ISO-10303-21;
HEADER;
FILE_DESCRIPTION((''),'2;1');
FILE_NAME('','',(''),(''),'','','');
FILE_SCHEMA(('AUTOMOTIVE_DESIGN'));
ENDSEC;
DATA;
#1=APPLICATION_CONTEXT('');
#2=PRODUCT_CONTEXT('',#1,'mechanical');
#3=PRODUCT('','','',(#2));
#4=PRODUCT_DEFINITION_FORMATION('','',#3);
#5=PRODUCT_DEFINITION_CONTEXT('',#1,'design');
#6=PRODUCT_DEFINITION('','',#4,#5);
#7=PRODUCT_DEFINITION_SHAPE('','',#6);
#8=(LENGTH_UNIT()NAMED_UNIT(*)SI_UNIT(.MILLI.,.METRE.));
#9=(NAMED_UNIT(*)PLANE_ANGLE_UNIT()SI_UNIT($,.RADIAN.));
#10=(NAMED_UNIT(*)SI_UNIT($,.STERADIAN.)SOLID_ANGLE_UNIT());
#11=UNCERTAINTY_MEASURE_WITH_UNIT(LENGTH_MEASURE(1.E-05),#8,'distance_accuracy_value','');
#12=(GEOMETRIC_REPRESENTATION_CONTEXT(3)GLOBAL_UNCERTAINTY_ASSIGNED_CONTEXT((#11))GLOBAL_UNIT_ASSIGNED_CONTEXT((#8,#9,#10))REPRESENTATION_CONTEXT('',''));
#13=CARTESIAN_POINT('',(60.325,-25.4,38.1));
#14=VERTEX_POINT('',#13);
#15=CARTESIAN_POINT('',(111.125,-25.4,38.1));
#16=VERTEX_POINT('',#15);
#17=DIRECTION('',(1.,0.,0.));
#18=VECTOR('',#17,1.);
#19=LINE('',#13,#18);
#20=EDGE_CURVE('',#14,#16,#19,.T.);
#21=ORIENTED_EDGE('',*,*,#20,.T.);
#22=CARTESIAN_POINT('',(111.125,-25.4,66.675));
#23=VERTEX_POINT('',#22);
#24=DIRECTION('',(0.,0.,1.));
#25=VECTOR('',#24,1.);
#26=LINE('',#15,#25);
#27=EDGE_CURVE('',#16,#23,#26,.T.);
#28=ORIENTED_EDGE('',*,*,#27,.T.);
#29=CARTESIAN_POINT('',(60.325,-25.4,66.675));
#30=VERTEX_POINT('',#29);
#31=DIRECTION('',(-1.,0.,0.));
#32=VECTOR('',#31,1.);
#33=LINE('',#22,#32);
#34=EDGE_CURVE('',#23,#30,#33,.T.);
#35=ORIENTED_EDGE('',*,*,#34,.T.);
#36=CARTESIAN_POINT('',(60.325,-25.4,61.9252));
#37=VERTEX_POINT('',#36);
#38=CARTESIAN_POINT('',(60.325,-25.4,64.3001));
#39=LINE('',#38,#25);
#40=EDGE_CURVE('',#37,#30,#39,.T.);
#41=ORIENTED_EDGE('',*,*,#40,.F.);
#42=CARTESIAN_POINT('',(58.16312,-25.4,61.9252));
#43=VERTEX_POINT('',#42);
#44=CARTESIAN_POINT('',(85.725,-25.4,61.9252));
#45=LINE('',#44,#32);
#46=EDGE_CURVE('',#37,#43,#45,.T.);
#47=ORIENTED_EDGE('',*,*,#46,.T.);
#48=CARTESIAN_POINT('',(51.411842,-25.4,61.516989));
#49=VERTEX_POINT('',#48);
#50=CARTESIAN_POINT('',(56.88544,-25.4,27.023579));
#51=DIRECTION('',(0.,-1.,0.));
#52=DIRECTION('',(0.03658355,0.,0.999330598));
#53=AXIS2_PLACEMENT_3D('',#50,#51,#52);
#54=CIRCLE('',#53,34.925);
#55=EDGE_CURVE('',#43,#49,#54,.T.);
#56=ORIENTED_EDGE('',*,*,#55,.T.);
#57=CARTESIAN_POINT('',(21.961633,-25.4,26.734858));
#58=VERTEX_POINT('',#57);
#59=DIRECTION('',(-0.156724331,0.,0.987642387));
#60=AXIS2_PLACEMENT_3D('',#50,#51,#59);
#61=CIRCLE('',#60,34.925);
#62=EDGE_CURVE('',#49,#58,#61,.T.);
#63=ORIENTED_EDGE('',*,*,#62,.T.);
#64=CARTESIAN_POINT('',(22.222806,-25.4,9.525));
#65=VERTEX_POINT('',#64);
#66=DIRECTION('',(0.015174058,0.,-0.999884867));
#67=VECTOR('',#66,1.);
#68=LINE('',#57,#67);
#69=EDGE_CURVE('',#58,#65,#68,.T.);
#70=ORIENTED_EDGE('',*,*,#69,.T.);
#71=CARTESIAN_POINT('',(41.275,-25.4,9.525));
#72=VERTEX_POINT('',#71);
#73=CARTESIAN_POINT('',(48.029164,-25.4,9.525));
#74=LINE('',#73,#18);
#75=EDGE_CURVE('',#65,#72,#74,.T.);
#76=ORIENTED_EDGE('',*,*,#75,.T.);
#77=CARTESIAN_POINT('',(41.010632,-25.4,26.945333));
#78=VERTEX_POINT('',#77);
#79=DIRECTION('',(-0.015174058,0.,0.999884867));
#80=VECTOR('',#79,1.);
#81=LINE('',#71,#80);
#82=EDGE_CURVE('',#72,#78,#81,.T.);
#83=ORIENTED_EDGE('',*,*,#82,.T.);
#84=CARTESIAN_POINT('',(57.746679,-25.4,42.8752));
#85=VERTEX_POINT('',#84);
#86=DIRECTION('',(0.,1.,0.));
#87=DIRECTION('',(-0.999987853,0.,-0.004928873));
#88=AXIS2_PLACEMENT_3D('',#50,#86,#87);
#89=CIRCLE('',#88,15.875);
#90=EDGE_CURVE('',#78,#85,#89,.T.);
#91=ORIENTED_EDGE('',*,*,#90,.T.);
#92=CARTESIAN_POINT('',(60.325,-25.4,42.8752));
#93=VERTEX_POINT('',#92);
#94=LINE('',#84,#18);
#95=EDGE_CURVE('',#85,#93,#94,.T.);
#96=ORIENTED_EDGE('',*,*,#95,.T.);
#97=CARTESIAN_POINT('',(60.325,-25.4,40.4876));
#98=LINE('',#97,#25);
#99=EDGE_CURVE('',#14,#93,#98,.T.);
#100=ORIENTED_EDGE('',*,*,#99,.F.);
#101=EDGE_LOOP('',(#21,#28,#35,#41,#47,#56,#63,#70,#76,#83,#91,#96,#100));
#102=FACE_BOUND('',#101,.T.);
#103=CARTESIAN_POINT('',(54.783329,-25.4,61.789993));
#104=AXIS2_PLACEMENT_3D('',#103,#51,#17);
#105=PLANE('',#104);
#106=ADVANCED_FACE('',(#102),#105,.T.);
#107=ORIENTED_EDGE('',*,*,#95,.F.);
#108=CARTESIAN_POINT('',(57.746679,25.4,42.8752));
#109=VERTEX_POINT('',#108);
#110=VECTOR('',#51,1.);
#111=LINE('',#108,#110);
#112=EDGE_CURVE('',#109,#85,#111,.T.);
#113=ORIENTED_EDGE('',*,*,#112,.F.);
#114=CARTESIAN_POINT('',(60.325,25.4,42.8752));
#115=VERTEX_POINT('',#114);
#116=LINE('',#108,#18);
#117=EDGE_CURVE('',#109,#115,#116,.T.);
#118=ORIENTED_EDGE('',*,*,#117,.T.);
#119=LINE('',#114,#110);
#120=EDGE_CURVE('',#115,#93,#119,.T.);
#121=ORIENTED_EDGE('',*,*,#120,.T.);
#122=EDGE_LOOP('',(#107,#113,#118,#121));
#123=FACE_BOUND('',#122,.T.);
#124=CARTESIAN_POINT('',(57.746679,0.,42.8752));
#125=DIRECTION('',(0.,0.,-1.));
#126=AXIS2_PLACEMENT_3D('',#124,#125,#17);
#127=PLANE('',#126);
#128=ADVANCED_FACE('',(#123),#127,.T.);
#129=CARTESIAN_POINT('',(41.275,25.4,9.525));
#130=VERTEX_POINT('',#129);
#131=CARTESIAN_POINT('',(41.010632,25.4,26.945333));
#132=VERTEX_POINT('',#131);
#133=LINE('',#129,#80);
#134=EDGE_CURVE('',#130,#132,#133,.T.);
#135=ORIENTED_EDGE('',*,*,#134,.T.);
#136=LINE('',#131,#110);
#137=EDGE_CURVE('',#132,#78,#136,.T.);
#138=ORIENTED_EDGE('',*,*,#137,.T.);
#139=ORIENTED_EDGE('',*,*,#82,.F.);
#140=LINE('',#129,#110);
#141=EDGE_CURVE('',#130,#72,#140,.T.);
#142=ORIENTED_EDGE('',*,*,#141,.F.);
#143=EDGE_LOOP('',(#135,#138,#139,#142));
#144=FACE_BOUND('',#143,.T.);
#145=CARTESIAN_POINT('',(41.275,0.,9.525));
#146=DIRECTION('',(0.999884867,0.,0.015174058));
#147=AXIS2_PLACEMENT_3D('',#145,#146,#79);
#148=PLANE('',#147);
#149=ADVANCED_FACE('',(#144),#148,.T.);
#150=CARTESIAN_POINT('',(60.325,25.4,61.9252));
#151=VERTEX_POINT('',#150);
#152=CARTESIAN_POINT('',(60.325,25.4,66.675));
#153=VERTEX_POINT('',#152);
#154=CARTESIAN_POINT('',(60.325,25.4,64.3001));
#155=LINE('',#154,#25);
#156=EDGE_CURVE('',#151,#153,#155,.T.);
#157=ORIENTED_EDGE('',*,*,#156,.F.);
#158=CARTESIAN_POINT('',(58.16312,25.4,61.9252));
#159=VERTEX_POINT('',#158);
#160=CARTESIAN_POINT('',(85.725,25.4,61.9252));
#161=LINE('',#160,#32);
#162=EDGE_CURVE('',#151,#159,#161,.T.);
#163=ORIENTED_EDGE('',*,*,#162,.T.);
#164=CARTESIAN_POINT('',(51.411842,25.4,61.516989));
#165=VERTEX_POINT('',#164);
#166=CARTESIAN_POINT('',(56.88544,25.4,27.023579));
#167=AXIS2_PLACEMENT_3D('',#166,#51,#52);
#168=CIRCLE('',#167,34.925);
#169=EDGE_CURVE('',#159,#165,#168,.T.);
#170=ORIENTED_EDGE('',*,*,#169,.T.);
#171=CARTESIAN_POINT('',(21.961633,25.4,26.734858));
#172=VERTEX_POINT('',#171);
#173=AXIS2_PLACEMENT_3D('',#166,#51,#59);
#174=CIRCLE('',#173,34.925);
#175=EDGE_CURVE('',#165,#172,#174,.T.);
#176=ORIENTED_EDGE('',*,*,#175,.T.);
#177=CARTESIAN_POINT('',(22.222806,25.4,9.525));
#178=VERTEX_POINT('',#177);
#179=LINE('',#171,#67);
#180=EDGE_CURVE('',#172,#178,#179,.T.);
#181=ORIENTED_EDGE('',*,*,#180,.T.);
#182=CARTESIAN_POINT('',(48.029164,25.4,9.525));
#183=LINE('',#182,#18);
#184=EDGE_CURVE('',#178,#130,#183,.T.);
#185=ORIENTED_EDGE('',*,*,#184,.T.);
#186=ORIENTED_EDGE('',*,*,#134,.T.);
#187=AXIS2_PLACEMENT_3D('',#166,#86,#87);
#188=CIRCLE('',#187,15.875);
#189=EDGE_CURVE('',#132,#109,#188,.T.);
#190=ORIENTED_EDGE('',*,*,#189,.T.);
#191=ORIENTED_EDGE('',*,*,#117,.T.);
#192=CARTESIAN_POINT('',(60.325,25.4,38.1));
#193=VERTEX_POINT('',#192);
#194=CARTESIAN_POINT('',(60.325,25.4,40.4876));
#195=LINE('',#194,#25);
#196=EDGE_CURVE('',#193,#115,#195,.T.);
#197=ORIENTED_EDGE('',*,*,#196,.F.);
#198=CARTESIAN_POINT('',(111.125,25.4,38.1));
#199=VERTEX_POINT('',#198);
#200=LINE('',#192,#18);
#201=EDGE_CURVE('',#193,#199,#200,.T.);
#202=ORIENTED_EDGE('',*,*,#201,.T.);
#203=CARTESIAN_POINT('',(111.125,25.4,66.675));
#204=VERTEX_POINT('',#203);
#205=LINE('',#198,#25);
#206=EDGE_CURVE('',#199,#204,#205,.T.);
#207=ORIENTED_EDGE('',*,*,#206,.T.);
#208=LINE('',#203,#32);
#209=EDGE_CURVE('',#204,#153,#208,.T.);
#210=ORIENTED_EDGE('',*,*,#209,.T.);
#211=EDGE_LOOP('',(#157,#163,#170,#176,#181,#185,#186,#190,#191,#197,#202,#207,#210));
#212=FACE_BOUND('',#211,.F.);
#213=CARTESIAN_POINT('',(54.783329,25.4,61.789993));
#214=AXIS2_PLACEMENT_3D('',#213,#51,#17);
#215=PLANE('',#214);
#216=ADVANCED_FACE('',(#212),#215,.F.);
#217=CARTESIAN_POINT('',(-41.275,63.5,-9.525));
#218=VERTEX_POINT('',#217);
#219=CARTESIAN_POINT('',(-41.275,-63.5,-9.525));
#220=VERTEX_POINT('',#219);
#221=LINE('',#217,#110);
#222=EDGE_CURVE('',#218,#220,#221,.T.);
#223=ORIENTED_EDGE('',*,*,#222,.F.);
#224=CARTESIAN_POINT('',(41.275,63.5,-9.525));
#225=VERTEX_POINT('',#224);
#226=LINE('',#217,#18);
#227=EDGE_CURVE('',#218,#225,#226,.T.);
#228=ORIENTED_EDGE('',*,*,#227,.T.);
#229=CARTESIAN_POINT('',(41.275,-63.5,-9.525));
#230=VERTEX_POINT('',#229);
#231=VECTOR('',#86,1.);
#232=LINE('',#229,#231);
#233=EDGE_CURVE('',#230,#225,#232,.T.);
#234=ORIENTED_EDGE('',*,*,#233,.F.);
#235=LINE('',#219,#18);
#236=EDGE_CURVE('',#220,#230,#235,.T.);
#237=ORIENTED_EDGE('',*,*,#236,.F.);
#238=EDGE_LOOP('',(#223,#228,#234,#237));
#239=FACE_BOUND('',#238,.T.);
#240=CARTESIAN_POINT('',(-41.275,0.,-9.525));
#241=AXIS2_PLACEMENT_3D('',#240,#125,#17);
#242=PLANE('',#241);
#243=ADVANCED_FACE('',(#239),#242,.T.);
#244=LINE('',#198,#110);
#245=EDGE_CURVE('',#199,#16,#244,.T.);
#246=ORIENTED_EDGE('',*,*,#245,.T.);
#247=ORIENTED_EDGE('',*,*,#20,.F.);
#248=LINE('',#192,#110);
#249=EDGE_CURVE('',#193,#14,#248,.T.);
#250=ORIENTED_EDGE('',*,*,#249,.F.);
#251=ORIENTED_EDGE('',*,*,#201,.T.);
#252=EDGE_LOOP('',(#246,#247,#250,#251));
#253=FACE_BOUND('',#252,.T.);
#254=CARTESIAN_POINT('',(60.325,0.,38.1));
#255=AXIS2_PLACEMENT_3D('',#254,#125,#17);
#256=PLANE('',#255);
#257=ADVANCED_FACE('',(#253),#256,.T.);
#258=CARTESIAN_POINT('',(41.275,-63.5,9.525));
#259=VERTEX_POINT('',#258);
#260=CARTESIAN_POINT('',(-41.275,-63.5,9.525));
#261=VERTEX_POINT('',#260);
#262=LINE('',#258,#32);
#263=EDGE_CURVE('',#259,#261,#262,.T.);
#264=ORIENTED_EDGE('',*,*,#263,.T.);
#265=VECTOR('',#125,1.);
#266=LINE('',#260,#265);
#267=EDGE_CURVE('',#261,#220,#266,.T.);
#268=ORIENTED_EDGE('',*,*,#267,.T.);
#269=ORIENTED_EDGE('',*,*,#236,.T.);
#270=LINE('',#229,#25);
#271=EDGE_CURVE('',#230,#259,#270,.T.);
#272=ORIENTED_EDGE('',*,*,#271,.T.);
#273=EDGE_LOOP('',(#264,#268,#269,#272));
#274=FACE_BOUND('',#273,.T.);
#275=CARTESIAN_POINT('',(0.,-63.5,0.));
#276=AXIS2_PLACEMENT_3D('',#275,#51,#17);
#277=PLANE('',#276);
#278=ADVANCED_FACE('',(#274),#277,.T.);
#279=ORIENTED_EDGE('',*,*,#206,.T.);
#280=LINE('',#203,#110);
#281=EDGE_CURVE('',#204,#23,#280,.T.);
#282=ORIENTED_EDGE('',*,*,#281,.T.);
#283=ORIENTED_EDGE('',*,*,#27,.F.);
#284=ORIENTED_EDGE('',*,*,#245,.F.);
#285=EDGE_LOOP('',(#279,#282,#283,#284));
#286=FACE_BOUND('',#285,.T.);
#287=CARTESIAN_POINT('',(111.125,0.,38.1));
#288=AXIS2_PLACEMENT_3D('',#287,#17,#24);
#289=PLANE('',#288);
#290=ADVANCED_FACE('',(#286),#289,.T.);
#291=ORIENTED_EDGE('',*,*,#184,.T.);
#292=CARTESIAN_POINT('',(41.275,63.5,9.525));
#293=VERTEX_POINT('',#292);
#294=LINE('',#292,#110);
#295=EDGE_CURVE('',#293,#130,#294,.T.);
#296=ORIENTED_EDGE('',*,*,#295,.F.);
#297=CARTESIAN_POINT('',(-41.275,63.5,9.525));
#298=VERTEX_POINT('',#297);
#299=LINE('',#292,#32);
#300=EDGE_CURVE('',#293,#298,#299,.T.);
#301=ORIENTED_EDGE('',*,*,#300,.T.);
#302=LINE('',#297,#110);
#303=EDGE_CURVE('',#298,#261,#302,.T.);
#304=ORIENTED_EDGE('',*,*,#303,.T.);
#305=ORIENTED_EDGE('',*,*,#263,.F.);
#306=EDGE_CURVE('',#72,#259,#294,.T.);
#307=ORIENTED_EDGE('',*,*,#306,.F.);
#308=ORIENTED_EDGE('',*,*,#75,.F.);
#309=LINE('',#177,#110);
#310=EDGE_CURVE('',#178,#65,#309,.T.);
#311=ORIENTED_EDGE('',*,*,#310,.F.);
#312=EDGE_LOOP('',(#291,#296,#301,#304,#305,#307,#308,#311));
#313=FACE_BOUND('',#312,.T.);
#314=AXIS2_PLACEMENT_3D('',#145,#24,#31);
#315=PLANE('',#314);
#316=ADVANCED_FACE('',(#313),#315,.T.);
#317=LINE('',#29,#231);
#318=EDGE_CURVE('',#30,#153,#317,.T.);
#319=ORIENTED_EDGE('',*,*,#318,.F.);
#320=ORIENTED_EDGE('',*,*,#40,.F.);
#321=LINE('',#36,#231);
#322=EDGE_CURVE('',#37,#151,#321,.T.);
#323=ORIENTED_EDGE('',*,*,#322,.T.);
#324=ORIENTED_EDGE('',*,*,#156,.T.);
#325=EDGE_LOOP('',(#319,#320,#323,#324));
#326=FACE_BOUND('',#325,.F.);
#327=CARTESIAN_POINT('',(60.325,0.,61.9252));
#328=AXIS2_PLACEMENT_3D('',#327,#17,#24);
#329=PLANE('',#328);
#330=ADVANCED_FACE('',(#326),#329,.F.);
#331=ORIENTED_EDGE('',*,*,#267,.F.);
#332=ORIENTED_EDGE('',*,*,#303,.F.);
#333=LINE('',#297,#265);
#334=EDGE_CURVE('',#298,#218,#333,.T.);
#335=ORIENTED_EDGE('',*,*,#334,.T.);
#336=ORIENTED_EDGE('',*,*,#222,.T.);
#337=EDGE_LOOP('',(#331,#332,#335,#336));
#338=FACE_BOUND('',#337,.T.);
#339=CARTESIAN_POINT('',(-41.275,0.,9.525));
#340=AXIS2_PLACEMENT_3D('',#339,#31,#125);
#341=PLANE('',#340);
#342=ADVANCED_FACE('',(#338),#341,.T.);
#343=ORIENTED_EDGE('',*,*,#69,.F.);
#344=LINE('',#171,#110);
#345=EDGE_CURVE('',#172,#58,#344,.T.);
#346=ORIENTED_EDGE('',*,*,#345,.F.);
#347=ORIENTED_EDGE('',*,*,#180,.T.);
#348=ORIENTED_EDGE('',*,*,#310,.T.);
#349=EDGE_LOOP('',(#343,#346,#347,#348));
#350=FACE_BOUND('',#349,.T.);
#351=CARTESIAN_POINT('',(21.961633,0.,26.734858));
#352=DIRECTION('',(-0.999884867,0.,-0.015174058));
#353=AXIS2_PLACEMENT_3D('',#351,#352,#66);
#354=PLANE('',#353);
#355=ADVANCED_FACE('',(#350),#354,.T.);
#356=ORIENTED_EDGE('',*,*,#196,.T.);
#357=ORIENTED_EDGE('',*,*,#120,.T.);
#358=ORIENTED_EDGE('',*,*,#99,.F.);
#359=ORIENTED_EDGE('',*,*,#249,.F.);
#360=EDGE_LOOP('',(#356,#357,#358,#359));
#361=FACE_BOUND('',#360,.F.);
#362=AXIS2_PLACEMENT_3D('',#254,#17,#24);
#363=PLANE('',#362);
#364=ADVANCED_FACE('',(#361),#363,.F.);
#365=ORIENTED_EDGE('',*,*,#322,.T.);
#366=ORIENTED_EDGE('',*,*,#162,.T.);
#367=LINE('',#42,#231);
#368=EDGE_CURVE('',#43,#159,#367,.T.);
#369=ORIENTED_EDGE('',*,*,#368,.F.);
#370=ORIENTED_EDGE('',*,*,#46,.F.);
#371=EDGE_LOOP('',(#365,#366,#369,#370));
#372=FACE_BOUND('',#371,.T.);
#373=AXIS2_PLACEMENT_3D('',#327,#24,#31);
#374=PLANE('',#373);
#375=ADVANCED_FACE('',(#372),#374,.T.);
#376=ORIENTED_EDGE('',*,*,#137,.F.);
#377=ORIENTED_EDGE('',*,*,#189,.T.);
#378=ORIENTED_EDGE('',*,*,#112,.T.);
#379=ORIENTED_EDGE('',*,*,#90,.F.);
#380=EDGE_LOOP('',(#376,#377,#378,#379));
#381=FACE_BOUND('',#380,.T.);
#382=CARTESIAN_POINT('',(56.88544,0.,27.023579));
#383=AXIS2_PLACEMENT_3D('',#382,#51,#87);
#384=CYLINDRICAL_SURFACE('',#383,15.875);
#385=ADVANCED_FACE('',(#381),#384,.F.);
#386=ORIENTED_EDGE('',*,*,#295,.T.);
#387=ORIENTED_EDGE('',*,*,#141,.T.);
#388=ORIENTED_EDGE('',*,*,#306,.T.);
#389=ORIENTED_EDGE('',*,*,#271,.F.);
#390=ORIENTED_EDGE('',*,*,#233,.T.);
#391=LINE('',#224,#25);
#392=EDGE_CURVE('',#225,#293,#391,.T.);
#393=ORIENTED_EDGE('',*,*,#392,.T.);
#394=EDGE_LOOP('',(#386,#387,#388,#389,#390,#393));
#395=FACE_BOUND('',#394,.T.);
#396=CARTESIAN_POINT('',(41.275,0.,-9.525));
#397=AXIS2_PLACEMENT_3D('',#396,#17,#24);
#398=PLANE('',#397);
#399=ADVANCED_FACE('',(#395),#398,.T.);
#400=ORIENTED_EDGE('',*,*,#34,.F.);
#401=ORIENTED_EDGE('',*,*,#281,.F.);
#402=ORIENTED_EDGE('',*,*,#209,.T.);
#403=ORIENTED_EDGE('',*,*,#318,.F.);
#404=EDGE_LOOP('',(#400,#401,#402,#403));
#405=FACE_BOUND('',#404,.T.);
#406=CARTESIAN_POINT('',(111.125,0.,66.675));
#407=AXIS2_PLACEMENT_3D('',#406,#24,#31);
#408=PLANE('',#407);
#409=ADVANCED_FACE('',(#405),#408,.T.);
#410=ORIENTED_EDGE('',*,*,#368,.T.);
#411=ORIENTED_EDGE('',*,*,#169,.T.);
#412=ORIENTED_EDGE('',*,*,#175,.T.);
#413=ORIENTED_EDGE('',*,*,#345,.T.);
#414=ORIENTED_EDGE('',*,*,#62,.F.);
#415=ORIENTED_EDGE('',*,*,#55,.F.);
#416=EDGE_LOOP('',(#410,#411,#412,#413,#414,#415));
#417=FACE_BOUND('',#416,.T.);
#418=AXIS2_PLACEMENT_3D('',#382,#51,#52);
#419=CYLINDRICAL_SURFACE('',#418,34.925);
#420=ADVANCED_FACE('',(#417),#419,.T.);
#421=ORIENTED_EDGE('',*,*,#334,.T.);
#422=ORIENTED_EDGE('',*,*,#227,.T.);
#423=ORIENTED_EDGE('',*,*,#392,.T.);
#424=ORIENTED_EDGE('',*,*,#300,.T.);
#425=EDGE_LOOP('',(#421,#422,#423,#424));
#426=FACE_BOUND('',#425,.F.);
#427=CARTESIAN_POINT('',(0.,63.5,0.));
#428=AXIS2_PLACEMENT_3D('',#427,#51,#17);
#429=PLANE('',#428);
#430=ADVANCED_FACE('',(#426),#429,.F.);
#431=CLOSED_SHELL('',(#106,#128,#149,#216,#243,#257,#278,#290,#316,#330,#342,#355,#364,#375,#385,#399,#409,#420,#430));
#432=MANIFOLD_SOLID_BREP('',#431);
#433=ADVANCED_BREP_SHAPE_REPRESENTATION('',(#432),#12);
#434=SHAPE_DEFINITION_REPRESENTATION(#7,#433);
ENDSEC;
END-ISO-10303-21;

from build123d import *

# Parameters (mm, degrees)
F1_DEPTH = 63.5
F0_W     = 25.4
F0_H     = 19.05
F0_H_2   = 4.7752
F0_H_3   = 4.7498
F2_DEPTH = 25.4


# Not quite as in the source:
# - a feature of the source that left no trace in its solid (it failed there, or was rolled back) is left out


with BuildPart() as f1:
    # F0 (on Front) → F1 (new body, symmetric)
    with BuildSketch(Plane.XZ):
        Polygon((41.275, -9.525), (41.275, 9.525), (22.2228064707, 9.525), (-41.275, 9.525), (-41.275, -9.525), align=None)
    extrude(amount=F1_DEPTH, both=True)

    # F0 (on Front) → F2 (join, symmetric)
    with BuildSketch(Plane.XZ):
        with BuildLine():
            add(Edge.make_bspline(
                [(51.4118423464, 61.5169892273), (53.7469843796, 61.749049716), (56.003883812, 61.8875588148), (58.1631200711, 61.9252)],
                knots=[105.6886926289, 105.6886926289, 105.6886926289, 105.6886926289, 112.3998251036, 112.3998251036, 112.3998251036, 112.3998251036], degree=3))
            ThreePointArc((58.1631200711, 61.9252), (54.7775761271, 61.8849118409), (51.4118423464, 61.5169892273))
        make_face()
        Polygon((41.275, -9.525), (41.275, 9.525), (22.2228064707, 9.525), (-41.275, 9.525), (-41.275, -9.525), align=None)
        with BuildLine():
            Line((41.275, 9.525), (41.0106324272, 26.945333009))
            ThreePointArc((41.0106324272, 26.945333009), (45.9404876374, 38.5224332318), (57.7466785314, 42.8752))
            Line((57.7466785314, 42.8752), (60.325, 42.8752))
            Line((60.325, 42.8752), (60.325, 61.9252))
            Line((60.325, 61.9252), (58.1631200711, 61.9252))
            add(Edge.make_bspline(
                [(51.4118423464, 61.5169892273), (53.7469843796, 61.749049716), (56.003883812, 61.8875588148), (58.1631200711, 61.9252)],
                knots=[105.6886926289, 105.6886926289, 105.6886926289, 105.6886926289, 112.3998251036, 112.3998251036, 112.3998251036, 112.3998251036], degree=3))
            ThreePointArc((51.4118423464, 61.5169892273), (30.2314207387, 49.5916736898), (21.9616330248, 26.7348580473))
            Line((21.9616330248, 26.7348580473), (22.2228064707, 9.525))
            Line((22.2228064707, 9.525), (41.275, 9.525))
        make_face()
        with Locations((73.025, 52.4002)):
            Rectangle(F0_W, F0_H)
        with Locations((73.025, 40.4876)):
            Rectangle(F0_W, F0_H_2)
        Polygon((85.725, 61.9252), (85.725, 42.8752), (85.725, 38.1), (111.125, 38.1), (111.125, 66.675), (85.725, 66.675), align=None)
        with Locations((73.025, 64.3001)):
            Rectangle(F0_W, F0_H_3)
    extrude(amount=F2_DEPTH, both=True)


solid = f1.part
